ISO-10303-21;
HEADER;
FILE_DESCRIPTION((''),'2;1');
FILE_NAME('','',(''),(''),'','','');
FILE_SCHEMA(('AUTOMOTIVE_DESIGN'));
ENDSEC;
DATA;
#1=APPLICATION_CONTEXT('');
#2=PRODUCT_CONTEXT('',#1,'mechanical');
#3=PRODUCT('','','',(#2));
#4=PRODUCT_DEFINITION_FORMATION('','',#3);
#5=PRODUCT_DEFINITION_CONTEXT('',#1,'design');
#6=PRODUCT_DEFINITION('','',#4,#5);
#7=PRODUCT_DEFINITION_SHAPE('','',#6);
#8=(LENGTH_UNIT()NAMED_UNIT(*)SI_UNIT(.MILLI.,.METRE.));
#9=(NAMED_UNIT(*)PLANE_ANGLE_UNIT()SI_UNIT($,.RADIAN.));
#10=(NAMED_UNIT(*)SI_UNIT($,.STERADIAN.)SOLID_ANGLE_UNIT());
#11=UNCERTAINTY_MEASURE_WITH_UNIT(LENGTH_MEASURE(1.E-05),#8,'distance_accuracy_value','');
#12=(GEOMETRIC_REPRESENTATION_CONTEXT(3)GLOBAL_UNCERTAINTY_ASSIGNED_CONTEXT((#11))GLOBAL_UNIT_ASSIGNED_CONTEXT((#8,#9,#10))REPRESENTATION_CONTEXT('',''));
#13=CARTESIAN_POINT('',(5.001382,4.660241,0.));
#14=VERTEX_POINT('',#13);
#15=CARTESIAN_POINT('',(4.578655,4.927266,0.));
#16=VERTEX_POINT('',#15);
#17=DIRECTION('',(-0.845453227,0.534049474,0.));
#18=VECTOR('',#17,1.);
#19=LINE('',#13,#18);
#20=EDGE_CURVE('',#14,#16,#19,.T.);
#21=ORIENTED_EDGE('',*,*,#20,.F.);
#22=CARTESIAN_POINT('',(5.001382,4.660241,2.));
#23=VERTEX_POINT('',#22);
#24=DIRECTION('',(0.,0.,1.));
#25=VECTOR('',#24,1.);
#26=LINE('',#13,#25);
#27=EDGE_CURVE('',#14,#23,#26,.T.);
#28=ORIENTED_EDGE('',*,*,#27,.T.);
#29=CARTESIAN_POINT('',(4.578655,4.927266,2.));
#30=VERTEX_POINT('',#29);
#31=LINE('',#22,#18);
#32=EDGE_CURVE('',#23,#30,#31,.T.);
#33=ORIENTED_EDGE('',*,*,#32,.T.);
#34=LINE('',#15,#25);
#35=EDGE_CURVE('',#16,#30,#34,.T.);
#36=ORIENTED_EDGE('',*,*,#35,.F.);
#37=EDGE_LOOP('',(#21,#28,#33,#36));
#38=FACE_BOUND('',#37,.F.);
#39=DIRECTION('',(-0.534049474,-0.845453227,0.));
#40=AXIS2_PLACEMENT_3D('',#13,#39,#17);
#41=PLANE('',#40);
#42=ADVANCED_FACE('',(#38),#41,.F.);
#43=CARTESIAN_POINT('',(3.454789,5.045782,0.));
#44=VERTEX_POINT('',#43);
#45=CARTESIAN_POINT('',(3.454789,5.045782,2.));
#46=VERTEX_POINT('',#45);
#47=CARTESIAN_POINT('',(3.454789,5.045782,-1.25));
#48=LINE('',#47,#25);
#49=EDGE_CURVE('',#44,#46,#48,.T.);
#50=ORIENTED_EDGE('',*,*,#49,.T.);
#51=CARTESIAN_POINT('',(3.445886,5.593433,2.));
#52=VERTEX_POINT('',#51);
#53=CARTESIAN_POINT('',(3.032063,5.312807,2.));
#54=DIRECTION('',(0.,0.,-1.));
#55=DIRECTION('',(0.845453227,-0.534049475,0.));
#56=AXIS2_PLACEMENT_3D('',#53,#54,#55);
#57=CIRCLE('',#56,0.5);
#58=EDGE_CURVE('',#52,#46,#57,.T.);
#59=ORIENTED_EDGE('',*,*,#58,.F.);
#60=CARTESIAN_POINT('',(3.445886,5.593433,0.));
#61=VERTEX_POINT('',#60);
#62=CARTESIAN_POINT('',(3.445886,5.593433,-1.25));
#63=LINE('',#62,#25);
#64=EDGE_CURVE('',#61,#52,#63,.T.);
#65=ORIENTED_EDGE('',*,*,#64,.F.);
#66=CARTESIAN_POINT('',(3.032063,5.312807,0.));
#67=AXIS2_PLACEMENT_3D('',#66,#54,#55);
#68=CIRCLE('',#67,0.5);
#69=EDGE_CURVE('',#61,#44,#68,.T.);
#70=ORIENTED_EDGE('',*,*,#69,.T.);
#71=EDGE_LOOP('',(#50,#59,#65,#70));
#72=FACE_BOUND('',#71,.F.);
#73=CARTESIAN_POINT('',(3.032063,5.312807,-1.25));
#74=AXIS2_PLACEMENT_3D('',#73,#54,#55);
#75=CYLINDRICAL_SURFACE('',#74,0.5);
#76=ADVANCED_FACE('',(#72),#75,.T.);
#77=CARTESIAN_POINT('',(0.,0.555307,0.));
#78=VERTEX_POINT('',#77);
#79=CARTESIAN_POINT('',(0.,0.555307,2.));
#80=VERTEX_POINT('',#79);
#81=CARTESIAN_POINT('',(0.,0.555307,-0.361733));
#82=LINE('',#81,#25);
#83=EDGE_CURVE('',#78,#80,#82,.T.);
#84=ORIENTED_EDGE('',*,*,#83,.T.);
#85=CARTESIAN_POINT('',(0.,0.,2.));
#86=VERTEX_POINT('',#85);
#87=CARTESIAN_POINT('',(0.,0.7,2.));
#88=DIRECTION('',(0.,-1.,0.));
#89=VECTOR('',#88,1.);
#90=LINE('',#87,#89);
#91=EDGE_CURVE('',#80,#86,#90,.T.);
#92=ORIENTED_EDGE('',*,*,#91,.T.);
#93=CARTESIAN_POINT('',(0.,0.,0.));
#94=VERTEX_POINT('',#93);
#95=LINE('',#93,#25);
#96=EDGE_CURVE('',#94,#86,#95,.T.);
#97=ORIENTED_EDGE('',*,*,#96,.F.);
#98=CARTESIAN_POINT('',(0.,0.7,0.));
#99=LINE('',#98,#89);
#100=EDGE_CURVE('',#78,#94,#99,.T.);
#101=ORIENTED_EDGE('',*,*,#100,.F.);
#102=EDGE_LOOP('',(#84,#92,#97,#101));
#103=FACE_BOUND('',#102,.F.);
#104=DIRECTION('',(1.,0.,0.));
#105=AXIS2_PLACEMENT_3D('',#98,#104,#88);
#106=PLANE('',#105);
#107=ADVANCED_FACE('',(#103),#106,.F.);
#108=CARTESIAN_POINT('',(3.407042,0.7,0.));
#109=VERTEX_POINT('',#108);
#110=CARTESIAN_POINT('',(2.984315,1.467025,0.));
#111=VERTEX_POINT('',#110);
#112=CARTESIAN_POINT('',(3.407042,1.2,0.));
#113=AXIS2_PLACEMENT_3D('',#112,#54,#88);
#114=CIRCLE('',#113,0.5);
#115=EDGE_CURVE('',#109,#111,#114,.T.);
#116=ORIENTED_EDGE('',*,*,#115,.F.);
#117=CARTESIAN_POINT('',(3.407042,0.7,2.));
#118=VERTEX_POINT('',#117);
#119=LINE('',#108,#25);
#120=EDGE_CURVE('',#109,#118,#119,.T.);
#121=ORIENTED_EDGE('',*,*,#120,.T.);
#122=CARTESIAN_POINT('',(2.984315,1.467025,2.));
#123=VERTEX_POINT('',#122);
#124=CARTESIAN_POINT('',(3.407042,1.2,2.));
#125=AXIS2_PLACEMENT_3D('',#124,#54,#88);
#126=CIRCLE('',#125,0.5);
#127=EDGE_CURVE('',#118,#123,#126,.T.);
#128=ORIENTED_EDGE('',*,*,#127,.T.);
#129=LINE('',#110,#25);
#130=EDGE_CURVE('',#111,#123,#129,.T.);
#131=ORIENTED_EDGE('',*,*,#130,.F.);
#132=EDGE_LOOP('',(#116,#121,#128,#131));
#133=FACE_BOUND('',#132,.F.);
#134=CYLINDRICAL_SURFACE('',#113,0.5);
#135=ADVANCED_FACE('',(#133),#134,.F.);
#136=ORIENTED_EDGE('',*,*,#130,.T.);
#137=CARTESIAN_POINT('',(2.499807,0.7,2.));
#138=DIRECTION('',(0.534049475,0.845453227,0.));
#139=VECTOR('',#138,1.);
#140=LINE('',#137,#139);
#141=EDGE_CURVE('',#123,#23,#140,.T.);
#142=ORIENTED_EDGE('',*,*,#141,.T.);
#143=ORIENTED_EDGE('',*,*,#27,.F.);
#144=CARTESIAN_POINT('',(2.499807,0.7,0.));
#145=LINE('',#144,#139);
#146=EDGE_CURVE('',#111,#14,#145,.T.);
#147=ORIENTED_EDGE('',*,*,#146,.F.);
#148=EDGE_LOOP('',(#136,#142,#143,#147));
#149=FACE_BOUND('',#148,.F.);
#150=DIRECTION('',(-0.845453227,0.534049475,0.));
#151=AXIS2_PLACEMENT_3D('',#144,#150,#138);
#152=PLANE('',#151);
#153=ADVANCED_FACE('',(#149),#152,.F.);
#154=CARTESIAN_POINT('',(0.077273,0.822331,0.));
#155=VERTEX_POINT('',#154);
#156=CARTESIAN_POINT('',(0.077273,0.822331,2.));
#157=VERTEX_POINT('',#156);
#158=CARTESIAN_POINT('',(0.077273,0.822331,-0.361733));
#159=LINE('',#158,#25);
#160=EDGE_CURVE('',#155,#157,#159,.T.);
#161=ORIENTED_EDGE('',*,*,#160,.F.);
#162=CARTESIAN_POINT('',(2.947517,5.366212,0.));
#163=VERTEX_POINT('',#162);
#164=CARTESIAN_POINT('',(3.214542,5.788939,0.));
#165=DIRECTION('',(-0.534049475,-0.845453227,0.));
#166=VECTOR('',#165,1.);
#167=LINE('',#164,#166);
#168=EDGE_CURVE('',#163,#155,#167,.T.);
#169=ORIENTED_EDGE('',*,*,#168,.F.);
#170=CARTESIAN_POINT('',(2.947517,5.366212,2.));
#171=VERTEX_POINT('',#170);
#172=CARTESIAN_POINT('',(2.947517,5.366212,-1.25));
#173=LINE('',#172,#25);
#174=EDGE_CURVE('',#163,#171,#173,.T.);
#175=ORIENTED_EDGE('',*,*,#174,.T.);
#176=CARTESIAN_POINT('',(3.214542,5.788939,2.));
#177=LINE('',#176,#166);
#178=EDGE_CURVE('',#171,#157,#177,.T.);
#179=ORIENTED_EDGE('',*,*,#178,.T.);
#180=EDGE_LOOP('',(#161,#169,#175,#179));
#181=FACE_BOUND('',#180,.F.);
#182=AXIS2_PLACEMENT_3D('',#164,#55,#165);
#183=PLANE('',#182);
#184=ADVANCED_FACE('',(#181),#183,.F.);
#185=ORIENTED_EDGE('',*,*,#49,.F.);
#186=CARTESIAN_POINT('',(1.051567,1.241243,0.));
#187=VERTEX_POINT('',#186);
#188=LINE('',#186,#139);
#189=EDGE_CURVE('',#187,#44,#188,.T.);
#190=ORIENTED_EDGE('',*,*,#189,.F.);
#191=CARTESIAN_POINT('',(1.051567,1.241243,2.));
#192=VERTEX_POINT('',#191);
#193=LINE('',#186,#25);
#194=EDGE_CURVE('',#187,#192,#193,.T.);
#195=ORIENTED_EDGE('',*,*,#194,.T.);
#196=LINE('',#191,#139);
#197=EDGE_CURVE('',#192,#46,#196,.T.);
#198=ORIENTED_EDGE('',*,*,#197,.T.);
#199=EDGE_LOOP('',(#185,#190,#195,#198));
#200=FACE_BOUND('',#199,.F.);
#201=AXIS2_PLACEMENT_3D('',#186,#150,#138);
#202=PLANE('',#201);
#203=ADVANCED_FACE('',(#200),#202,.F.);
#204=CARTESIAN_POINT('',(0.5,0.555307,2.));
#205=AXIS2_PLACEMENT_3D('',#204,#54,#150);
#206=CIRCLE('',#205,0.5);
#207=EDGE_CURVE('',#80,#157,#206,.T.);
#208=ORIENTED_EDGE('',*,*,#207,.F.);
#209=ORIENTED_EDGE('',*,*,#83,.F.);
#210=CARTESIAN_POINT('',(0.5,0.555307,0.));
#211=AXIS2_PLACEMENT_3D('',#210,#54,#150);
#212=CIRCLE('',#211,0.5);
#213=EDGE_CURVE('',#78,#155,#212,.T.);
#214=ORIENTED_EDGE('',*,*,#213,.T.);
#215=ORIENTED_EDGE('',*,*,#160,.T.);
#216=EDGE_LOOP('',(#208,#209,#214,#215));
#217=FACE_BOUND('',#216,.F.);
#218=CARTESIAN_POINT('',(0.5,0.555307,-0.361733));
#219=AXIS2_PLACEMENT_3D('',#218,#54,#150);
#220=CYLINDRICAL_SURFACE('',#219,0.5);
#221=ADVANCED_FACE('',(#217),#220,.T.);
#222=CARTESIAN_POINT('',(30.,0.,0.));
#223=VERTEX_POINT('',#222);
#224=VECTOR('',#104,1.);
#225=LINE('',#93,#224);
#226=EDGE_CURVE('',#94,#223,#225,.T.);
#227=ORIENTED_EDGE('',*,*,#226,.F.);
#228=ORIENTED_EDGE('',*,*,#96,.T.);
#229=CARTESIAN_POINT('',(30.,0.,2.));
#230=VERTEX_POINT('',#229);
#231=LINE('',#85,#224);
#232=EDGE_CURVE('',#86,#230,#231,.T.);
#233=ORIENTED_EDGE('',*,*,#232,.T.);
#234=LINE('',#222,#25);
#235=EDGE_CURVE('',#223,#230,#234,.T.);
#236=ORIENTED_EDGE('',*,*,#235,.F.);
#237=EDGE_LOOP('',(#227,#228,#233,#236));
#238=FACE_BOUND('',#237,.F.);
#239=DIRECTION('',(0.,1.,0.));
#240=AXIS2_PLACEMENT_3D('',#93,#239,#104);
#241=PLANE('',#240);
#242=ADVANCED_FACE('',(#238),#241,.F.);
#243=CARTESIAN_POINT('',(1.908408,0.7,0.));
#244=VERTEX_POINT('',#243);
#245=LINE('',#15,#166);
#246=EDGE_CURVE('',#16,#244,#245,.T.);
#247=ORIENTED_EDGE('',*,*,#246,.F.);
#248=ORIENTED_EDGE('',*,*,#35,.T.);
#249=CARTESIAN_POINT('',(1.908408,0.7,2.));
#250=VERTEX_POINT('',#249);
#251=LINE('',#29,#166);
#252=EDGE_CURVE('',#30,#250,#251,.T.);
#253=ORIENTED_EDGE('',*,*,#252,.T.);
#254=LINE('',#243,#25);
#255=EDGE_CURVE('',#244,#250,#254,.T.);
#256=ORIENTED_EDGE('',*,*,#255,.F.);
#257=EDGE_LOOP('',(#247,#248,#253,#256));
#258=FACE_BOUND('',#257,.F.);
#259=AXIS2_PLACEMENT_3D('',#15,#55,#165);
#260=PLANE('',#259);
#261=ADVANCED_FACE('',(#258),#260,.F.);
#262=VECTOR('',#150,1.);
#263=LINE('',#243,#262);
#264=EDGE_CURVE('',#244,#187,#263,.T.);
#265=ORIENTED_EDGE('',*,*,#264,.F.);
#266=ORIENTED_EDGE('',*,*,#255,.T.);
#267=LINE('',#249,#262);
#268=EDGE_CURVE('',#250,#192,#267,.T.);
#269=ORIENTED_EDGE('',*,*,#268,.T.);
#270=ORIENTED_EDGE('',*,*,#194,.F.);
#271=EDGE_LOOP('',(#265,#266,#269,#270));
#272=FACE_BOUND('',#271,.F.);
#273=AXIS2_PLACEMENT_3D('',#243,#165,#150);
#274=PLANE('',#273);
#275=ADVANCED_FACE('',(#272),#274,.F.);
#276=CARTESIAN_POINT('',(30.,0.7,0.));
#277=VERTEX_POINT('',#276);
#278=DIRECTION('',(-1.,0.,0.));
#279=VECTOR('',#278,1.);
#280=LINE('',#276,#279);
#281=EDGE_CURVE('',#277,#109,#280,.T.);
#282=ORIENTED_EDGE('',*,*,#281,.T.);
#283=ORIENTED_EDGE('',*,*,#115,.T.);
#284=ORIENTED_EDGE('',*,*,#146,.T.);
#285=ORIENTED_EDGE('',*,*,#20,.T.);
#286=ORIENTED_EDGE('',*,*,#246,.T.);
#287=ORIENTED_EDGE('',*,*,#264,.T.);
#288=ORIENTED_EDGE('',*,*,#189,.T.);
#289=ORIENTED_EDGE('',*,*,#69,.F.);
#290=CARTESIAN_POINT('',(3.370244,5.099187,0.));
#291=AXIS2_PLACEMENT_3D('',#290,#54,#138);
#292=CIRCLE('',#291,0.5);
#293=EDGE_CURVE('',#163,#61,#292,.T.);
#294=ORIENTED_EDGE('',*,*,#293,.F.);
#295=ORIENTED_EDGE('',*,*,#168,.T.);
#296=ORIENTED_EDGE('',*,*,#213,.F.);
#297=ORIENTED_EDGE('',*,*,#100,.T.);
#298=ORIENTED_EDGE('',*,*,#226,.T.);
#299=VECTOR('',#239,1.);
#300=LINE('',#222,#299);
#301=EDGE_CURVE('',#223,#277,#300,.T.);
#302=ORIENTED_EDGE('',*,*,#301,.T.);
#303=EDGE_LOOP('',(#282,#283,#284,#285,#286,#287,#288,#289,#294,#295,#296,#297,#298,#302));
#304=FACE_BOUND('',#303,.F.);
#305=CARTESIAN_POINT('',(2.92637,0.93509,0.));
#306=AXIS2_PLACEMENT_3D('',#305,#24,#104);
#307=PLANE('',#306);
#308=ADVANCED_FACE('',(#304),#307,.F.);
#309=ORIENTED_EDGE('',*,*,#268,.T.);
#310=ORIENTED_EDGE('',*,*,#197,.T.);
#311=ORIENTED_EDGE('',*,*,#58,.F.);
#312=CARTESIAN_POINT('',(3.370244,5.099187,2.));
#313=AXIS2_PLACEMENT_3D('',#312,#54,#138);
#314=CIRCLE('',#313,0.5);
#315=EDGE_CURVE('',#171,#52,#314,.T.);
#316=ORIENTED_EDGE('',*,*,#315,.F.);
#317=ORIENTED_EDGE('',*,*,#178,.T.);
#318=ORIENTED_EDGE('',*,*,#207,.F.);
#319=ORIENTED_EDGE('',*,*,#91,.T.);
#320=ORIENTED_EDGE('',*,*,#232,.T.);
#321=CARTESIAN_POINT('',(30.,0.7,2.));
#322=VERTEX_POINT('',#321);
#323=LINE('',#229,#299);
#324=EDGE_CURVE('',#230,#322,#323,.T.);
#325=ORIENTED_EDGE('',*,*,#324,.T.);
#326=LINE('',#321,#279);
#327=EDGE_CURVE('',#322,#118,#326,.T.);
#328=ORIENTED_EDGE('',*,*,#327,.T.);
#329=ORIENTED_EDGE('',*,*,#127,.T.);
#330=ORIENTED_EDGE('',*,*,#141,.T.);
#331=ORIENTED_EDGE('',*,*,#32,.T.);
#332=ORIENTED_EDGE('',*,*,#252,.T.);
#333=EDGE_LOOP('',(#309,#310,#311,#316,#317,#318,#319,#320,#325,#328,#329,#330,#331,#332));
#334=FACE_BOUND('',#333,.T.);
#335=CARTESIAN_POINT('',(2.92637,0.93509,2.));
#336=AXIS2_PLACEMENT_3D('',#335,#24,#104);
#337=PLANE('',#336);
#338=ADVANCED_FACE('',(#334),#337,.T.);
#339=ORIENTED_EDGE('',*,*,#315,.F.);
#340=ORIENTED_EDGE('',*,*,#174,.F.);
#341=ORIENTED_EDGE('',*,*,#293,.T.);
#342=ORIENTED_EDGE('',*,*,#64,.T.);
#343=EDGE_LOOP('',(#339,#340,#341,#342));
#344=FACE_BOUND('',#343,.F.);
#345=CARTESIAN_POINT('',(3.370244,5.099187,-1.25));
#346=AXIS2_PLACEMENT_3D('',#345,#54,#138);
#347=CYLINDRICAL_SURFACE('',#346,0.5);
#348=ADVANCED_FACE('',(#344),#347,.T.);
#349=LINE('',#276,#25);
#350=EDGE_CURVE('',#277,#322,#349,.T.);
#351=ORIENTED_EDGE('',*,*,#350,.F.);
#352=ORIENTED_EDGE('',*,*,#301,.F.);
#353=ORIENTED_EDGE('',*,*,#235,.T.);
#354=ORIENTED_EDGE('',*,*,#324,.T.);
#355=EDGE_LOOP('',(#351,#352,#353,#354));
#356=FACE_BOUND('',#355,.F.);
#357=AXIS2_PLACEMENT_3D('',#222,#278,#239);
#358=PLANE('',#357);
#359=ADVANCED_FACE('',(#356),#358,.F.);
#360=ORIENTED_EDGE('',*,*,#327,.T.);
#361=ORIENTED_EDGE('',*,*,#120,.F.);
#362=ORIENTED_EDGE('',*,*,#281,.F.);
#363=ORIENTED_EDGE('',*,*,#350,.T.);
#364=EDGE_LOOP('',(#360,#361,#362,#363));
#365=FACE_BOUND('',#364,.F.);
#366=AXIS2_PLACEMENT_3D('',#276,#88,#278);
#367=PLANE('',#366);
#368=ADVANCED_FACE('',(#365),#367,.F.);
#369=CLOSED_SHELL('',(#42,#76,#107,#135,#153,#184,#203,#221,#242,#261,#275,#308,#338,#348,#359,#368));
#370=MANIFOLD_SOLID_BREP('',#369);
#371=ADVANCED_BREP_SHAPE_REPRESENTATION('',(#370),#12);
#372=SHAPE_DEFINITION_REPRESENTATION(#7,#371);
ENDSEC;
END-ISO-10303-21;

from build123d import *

# Parameters (mm, degrees)
F1_DEPTH    = 2
F2_T1_DEPTH = 2
F2_T3_DEPTH = 2.7234665539
F2_T5_DEPTH = 4.5


# Not quite as in the source:
# - a fillet or chamfer that OpenCascade refuses, or shapes differently, is made with other operations: its cross-section is extruded or revolved along the edge and cut away or added


with BuildPart() as f1:
    # F0 (on Top) → F1 (new body)
    with BuildSketch(Plane.XY):
        Polygon((0, 0.7), (0, 0), (30, 0), (30, 0.7), (2.4998066677, 0.7), (5.0013818819, 4.6602413969), (4.5786552685, 4.9272661341), (1.9084078958, 0.7), (1.0515667407, 1.2412429146), (3.7218141134, 5.4685090487), (3.2145421773, 5.7889387335), align=None)
    extrude(amount=F1_DEPTH)

    # F2: fillet of radius 0.5 on 4 edges, made by hand

    # F2_s2 → F2_t1 (join)
    with BuildSketch(Plane.XY):
        with BuildLine():
            ThreePointArc((3.4070416429, 0.7), (2.9691419006, 0.9586624445), (2.9843150295, 1.4670247373))
            Line((2.9843150295, 1.4670247373), (2.4998066677, 0.7))
            Line((2.4998066677, 0.7), (3.4070416429, 0.7))
        make_face()
    extrude(amount=F2_T1_DEPTH)

    # F2_s4 → F2_t3 (cut)
    with BuildSketch(Plane.XY.offset(-0.3617332769)):
        with BuildLine():
            ThreePointArc((0.0772733866, 0.8223314265), (0.0197067007, 0.6942971445), (0, 0.5553066892))
            Line((0, 0.5553066892), (0, 0.7))
            Line((0, 0.7), (0.0772733866, 0.8223314265))
        make_face()
    extrude(amount=F2_T3_DEPTH, mode=Mode.SUBTRACT)

    # F2_s6 → F2_t5 (cut)
    with BuildSketch(Plane.XY.offset(-1.25)):
        with BuildLine():
            ThreePointArc((3.6372687907, 5.5219139962), (3.2601462009, 5.5869152402), (2.94751744, 5.3662121201))
            Line((2.94751744, 5.3662121201), (3.2145421773, 5.7889387335))
            Line((3.2145421773, 5.7889387335), (3.6372687907, 5.5219139962))
        make_face()
        with BuildLine():
            ThreePointArc((3.4547893761, 5.0457824353), (3.5197906201, 5.4229050251), (3.2990874999, 5.735533786))
            Line((3.2990874999, 5.735533786), (3.7218141134, 5.4685090487))
            Line((3.7218141134, 5.4685090487), (3.4547893761, 5.0457824353))
        make_face()
    extrude(amount=F2_T5_DEPTH, mode=Mode.SUBTRACT)


solid = f1.part
